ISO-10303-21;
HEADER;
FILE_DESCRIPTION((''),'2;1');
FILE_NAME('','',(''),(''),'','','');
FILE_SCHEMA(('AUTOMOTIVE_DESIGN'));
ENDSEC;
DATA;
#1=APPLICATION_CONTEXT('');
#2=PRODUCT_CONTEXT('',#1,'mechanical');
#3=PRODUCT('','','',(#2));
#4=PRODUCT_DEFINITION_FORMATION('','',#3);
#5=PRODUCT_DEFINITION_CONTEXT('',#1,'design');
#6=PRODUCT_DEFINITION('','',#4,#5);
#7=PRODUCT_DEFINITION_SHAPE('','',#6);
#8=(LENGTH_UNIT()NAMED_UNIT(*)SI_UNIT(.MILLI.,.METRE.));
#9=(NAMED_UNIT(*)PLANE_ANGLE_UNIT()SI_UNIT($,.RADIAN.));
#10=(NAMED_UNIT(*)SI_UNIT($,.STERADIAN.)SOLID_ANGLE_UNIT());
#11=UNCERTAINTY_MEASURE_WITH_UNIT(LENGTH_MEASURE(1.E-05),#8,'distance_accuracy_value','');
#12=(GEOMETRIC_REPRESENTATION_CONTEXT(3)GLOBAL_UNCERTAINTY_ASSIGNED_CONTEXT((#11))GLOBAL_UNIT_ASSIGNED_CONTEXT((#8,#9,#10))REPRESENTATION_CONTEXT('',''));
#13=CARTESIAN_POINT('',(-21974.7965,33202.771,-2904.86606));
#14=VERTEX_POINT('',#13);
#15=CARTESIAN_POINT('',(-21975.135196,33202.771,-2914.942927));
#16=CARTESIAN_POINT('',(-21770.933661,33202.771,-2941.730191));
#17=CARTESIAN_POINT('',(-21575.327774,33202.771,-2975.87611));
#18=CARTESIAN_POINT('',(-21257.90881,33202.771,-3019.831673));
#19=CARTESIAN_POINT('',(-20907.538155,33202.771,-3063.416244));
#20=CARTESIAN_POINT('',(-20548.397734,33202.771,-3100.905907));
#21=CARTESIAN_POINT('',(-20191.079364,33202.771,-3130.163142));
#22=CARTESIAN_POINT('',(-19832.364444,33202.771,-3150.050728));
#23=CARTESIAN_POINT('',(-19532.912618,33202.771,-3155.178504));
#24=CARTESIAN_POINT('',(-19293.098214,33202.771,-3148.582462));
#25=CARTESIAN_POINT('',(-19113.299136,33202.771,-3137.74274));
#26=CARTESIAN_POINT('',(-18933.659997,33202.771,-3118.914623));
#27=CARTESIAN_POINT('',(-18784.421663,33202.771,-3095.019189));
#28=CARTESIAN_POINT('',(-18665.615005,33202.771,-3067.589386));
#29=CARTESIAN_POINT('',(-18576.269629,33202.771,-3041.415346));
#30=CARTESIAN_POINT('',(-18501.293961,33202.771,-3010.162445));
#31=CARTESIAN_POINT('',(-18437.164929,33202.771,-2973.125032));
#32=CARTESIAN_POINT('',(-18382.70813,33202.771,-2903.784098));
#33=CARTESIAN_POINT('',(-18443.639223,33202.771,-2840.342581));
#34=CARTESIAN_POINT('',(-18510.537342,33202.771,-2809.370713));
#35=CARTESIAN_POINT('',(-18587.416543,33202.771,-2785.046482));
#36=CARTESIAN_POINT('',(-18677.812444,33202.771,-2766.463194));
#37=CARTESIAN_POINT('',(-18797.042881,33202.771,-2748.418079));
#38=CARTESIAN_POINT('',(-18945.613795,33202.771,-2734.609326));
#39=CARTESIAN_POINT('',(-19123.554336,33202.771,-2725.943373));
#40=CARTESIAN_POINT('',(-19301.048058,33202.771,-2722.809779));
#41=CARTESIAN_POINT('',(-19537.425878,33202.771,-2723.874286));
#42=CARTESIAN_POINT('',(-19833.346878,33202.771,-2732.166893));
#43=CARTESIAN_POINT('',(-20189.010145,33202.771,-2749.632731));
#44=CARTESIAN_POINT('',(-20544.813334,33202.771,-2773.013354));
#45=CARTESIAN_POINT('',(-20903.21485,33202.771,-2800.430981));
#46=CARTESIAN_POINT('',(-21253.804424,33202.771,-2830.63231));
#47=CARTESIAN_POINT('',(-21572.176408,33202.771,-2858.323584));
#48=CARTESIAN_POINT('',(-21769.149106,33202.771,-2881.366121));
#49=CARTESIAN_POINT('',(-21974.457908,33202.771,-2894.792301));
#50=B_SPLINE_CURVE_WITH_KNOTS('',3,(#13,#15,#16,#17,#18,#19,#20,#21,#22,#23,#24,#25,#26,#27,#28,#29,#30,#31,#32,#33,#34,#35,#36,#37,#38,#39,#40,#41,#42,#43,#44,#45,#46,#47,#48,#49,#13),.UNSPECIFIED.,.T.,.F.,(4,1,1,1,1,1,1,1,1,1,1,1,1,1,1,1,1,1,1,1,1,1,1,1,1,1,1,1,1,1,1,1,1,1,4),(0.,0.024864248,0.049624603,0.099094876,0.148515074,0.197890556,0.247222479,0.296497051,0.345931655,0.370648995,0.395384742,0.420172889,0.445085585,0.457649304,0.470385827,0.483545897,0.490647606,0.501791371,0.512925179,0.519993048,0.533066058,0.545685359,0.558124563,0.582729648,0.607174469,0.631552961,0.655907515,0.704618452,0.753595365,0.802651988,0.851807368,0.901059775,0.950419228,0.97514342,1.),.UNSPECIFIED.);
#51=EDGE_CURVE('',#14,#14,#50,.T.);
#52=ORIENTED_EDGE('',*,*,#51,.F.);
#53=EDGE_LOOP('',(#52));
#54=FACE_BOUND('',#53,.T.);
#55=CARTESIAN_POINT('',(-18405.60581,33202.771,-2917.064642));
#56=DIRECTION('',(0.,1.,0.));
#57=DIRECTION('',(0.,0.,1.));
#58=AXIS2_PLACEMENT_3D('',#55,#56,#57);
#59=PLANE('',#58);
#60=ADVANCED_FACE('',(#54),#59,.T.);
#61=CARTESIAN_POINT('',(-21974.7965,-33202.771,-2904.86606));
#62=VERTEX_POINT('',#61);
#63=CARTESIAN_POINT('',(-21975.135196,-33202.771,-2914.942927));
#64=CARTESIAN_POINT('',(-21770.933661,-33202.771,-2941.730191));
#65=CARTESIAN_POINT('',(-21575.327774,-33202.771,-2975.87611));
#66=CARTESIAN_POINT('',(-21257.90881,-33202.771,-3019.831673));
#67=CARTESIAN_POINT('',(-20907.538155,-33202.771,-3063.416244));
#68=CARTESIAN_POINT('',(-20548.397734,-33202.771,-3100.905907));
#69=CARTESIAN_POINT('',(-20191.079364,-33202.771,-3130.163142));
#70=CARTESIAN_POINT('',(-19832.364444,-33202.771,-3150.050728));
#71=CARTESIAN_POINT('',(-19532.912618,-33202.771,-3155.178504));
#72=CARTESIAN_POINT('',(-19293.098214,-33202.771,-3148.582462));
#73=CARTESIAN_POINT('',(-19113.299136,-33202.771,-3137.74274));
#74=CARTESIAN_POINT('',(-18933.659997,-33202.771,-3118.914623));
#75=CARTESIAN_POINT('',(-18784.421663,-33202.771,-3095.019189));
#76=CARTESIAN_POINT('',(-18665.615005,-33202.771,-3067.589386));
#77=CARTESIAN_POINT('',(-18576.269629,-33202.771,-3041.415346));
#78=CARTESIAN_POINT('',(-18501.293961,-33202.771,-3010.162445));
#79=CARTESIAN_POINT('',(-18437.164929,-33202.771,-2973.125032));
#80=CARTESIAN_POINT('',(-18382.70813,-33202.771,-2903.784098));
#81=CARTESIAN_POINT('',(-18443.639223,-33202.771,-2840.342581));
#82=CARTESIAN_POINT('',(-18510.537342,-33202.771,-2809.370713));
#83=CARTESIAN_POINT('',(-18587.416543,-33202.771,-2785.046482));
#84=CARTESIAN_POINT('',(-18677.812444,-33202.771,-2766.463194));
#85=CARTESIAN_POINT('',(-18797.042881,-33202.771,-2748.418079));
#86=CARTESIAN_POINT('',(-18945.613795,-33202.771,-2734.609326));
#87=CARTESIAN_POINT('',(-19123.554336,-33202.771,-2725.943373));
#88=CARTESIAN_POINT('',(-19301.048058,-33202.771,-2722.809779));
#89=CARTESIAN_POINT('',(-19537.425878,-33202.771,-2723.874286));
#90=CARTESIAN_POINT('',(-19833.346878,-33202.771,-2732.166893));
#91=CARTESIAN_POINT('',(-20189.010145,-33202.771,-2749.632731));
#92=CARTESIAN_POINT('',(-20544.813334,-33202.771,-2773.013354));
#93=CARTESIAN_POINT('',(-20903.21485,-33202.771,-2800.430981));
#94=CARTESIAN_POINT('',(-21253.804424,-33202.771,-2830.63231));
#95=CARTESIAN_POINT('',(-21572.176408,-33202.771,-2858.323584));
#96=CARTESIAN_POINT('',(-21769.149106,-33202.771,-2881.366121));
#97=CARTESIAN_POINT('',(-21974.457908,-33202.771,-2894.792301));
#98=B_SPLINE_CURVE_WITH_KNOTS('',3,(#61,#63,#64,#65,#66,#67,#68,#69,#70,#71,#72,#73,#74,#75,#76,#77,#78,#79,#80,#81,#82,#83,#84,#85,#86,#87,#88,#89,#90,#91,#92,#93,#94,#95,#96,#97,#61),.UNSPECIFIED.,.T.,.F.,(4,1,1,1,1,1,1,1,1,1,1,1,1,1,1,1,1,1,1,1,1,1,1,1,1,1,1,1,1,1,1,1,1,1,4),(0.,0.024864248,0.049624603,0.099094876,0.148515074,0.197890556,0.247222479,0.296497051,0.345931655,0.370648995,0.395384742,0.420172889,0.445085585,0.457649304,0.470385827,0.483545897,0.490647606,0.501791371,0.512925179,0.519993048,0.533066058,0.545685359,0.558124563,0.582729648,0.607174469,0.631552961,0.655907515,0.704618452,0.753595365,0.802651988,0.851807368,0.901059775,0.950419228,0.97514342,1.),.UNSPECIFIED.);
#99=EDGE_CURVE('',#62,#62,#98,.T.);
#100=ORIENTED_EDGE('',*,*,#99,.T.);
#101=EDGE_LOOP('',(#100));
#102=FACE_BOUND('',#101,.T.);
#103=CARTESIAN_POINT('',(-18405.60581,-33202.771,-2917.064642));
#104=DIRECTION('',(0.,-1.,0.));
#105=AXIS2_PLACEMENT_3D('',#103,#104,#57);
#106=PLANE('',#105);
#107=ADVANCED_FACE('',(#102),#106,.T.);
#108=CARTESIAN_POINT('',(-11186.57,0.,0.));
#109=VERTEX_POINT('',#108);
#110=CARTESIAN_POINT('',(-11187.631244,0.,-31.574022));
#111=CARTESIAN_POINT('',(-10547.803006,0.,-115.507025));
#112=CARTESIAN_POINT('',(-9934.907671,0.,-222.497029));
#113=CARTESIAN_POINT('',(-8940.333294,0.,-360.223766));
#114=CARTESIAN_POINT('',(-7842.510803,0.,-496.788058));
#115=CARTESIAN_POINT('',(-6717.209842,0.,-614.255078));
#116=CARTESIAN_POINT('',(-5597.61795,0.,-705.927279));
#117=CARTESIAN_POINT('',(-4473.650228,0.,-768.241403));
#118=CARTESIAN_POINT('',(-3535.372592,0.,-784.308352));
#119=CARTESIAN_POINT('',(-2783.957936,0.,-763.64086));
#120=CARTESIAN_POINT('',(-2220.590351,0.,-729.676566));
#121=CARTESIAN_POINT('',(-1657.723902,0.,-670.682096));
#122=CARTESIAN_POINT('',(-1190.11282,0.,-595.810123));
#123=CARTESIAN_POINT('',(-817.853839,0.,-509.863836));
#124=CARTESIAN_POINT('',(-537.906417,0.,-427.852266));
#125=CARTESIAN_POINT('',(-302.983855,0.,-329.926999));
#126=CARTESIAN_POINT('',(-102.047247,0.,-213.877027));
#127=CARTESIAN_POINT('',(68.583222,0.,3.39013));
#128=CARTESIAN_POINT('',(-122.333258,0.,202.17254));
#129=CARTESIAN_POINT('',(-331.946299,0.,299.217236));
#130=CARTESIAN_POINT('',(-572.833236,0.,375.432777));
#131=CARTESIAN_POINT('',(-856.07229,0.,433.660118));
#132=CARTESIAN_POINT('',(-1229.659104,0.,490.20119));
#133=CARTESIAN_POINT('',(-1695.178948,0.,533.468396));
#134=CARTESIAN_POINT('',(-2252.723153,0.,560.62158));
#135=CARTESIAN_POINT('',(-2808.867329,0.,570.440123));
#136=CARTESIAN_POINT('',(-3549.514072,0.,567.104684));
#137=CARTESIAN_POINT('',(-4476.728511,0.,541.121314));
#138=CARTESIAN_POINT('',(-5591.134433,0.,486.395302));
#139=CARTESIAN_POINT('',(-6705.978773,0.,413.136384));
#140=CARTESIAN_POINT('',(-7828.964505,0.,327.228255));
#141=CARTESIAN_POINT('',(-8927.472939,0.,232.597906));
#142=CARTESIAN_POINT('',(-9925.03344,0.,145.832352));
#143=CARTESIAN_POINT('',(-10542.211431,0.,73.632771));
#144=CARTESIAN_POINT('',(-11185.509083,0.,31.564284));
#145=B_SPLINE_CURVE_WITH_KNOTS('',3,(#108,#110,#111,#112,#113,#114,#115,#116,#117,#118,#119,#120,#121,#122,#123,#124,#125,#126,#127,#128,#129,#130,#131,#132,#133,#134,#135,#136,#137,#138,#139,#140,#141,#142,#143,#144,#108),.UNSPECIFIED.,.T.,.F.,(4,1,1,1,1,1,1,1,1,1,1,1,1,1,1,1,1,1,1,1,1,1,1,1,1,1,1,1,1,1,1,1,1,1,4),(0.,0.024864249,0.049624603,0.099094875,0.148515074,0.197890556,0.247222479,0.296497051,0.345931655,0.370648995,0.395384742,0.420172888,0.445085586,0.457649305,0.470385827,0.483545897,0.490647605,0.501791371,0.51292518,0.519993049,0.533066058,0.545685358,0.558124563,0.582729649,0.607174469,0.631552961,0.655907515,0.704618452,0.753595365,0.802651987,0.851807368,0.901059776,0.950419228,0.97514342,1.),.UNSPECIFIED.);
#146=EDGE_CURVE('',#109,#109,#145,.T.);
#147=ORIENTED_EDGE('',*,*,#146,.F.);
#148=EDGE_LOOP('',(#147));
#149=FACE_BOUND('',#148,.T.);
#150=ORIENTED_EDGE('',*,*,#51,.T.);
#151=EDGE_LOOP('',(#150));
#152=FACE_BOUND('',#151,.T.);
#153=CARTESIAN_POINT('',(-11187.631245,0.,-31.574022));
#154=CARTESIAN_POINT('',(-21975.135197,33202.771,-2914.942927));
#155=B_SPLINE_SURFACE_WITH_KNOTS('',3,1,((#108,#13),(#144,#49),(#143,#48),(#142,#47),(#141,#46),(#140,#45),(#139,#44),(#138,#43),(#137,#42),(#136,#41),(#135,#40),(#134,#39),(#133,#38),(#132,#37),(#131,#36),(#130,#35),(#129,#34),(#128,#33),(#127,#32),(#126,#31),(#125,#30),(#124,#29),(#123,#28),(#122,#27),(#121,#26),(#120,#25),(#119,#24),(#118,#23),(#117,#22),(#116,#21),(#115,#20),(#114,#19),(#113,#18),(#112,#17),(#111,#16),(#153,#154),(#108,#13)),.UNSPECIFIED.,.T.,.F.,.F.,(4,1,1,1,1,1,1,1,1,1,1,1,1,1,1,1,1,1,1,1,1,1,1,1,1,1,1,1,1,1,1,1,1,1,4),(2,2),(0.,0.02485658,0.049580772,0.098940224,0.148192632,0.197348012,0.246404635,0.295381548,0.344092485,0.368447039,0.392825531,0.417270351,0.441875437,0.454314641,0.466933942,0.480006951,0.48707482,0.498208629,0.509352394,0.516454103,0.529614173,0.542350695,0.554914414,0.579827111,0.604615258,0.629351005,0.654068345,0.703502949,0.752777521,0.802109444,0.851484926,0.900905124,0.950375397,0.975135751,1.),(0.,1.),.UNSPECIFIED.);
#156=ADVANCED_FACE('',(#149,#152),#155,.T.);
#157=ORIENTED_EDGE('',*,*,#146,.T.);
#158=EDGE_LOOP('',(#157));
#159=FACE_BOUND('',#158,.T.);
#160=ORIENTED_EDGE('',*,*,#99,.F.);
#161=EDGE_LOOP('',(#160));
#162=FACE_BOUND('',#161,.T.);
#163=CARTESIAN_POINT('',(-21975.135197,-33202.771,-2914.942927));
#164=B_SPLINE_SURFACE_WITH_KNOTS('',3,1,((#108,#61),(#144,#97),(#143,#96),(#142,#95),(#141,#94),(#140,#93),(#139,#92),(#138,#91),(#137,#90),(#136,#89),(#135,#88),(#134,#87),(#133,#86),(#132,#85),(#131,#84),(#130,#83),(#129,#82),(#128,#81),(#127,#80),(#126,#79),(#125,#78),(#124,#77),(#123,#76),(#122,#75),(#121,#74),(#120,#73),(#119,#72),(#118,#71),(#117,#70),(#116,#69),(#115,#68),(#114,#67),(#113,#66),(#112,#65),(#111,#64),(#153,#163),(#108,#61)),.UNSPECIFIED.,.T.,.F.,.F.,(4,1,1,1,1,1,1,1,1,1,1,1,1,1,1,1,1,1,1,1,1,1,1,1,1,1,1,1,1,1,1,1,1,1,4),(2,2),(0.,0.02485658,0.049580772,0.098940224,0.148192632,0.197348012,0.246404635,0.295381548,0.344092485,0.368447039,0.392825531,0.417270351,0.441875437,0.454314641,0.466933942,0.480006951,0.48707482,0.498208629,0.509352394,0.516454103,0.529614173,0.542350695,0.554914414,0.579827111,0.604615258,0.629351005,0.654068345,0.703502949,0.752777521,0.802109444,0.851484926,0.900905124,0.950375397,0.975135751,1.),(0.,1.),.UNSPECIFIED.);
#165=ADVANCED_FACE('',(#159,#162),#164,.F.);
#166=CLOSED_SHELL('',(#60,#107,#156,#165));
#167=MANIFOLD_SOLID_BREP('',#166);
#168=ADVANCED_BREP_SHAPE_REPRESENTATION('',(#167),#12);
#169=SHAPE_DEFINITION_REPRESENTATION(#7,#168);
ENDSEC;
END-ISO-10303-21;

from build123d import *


with BuildPart() as part:
    # Loft1: read off the stored shape, not the designer's step
    # Loft1: loft between two sections, ruled curve by curve
    loft1_from = [
        Edge.make_bspline([(-11186.569999882, 0, 3.3e-08), (-11185.509082555, 0, 31.564284048), (-10542.211430717, 0, 73.632770684), (-9925.033440107, 0, 145.832351574), (-8927.472939235, 0, 232.597906204), (-7828.964505415, 0, 327.228255227), (-6705.978773337, 0, 413.136384276), (-5591.134432869, 0, 486.395301947), (-4476.728510788, 0, 541.121314033), (-3549.514072259, 0, 567.104684482), (-2808.867329065, 0, 570.440123359), (-2252.723152734, 0, 560.621580177), (-1695.178948212, 0, 533.468396406), (-1229.659103782, 0, 490.20119035), (-856.072290218, 0, 433.660117816), (-572.833235786, 0, 375.432777002), (-331.946298504, 0, 299.217236285), (-122.333258311, 0, 202.17254011), (68.583222039, 0, 3.390129842), (-102.047246786, 0, -213.877027246), (-302.983855266, 0, -329.926998771), (-537.906417435, 0, -427.852265838), (-817.853839122, 0, -509.863835678), (-1190.112819677, 0, -595.810122679), (-1657.72390169, 0, -670.682096343), (-2220.590351439, 0, -729.676566337), (-2783.957935501, 0, -763.640860075), (-3535.372592153, 0, -784.308351911), (-4473.650228488, 0, -768.241402928), (-5597.617950288, 0, -705.927278911), (-6717.209841904, 0, -614.25507758), (-7842.510802627, 0, -496.788057901), (-8940.333294057, 0, -360.223766124), (-9934.907670627, 0, -222.497029421), (-10547.803006358, 0, -115.507024838), (-11187.63124452, 0, -31.574022107), (-11186.569999882, 0, 3.3e-08)], [0, 0, 0, 0, 0.02485658, 0.049580772, 0.098940224, 0.148192632, 0.197348012, 0.246404635, 0.295381548, 0.344092485, 0.368447039, 0.392825531, 0.417270351, 0.441875437, 0.454314641, 0.466933942, 0.480006951, 0.48707482, 0.498208629, 0.509352394, 0.516454103, 0.529614173, 0.542350695, 0.554914414, 0.579827111, 0.604615258, 0.629351005, 0.654068345, 0.703502949, 0.752777521, 0.802109444, 0.851484926, 0.900905124, 0.950375397, 0.975135751, 1, 1, 1, 1], 3),
    ]
    loft1_to = [
        Edge.make_bspline([(-21974.796499962, 33202.771, -2904.866059928), (-21974.457907631, 33202.771, -2894.792301227), (-21769.149106464, 33202.771, -2881.366120726), (-21572.176408352, 33202.771, -2858.323583949), (-21253.804423748, 33202.771, -2830.632310344), (-20903.214850276, 33202.771, -2800.430981065), (-20544.813333616, 33202.771, -2773.013354412), (-20189.010145297, 33202.771, -2749.632730714), (-19833.346878432, 33202.771, -2732.166893386), (-19537.425877759, 33202.771, -2723.874286391), (-19301.048058215, 33202.771, -2722.809779295), (-19123.554335577, 33202.771, -2725.943372622), (-18945.613794526, 33202.771, -2734.609326386), (-18797.042880773, 33202.771, -2748.418078987), (-18677.812444082, 33202.771, -2766.463193749), (-18587.416542691, 33202.771, -2785.046482333), (-18510.537342107, 33202.771, -2809.370713055), (-18443.639222906, 33202.771, -2840.342581458), (-18382.708130242, 33202.771, -2903.784097753), (-18437.164928968, 33202.771, -2973.125032418), (-18501.293960824, 33202.771, -3010.162445082), (-18576.269628964, 33202.771, -3041.415345811), (-18665.615005419, 33202.771, -3067.589385587), (-18784.421663277, 33202.771, -3095.019188704), (-18933.659996817, 33202.771, -3118.914622948), (-19113.299135708, 33202.771, -3137.742739566), (-19293.098213533, 33202.771, -3148.58246247), (-19532.912617963, 33202.771, -3155.178504231), (-19832.36444432, 33202.771, -3150.050728328), (-20191.079363505, 33202.771, -3130.163141669), (-20548.397733933, 33202.771, -3100.905907262), (-20907.538154996, 33202.771, -3063.416243755), (-21257.908810446, 33202.771, -3019.831673266), (-21575.327773905, 33202.771, -2975.876110077), (-21770.933660797, 33202.771, -2941.730191081), (-21975.135196754, 33202.771, -2914.942926558), (-21974.796499962, 33202.771, -2904.866059928)], [0, 0, 0, 0, 0.02485658, 0.049580772, 0.098940224, 0.148192632, 0.197348012, 0.246404635, 0.295381548, 0.344092485, 0.368447039, 0.392825531, 0.417270351, 0.441875437, 0.454314641, 0.466933942, 0.480006951, 0.48707482, 0.498208629, 0.509352394, 0.516454103, 0.529614173, 0.542350695, 0.554914414, 0.579827111, 0.604615258, 0.629351005, 0.654068345, 0.703502949, 0.752777521, 0.802109444, 0.851484926, 0.900905124, 0.950375397, 0.975135751, 1, 1, 1, 1], 3),
    ]
    loft1 = Solid(Shell([*[Face.make_surface_from_curves(loft1_from[k], loft1_to[k]) for k in range(1)], Face(Wire(loft1_from)), Face(Wire(loft1_to))]))
    add(loft1)

    # Specchia1: Loft1 across plane
    add(loft1.mirror(Plane.ZX))


solid = part.part
